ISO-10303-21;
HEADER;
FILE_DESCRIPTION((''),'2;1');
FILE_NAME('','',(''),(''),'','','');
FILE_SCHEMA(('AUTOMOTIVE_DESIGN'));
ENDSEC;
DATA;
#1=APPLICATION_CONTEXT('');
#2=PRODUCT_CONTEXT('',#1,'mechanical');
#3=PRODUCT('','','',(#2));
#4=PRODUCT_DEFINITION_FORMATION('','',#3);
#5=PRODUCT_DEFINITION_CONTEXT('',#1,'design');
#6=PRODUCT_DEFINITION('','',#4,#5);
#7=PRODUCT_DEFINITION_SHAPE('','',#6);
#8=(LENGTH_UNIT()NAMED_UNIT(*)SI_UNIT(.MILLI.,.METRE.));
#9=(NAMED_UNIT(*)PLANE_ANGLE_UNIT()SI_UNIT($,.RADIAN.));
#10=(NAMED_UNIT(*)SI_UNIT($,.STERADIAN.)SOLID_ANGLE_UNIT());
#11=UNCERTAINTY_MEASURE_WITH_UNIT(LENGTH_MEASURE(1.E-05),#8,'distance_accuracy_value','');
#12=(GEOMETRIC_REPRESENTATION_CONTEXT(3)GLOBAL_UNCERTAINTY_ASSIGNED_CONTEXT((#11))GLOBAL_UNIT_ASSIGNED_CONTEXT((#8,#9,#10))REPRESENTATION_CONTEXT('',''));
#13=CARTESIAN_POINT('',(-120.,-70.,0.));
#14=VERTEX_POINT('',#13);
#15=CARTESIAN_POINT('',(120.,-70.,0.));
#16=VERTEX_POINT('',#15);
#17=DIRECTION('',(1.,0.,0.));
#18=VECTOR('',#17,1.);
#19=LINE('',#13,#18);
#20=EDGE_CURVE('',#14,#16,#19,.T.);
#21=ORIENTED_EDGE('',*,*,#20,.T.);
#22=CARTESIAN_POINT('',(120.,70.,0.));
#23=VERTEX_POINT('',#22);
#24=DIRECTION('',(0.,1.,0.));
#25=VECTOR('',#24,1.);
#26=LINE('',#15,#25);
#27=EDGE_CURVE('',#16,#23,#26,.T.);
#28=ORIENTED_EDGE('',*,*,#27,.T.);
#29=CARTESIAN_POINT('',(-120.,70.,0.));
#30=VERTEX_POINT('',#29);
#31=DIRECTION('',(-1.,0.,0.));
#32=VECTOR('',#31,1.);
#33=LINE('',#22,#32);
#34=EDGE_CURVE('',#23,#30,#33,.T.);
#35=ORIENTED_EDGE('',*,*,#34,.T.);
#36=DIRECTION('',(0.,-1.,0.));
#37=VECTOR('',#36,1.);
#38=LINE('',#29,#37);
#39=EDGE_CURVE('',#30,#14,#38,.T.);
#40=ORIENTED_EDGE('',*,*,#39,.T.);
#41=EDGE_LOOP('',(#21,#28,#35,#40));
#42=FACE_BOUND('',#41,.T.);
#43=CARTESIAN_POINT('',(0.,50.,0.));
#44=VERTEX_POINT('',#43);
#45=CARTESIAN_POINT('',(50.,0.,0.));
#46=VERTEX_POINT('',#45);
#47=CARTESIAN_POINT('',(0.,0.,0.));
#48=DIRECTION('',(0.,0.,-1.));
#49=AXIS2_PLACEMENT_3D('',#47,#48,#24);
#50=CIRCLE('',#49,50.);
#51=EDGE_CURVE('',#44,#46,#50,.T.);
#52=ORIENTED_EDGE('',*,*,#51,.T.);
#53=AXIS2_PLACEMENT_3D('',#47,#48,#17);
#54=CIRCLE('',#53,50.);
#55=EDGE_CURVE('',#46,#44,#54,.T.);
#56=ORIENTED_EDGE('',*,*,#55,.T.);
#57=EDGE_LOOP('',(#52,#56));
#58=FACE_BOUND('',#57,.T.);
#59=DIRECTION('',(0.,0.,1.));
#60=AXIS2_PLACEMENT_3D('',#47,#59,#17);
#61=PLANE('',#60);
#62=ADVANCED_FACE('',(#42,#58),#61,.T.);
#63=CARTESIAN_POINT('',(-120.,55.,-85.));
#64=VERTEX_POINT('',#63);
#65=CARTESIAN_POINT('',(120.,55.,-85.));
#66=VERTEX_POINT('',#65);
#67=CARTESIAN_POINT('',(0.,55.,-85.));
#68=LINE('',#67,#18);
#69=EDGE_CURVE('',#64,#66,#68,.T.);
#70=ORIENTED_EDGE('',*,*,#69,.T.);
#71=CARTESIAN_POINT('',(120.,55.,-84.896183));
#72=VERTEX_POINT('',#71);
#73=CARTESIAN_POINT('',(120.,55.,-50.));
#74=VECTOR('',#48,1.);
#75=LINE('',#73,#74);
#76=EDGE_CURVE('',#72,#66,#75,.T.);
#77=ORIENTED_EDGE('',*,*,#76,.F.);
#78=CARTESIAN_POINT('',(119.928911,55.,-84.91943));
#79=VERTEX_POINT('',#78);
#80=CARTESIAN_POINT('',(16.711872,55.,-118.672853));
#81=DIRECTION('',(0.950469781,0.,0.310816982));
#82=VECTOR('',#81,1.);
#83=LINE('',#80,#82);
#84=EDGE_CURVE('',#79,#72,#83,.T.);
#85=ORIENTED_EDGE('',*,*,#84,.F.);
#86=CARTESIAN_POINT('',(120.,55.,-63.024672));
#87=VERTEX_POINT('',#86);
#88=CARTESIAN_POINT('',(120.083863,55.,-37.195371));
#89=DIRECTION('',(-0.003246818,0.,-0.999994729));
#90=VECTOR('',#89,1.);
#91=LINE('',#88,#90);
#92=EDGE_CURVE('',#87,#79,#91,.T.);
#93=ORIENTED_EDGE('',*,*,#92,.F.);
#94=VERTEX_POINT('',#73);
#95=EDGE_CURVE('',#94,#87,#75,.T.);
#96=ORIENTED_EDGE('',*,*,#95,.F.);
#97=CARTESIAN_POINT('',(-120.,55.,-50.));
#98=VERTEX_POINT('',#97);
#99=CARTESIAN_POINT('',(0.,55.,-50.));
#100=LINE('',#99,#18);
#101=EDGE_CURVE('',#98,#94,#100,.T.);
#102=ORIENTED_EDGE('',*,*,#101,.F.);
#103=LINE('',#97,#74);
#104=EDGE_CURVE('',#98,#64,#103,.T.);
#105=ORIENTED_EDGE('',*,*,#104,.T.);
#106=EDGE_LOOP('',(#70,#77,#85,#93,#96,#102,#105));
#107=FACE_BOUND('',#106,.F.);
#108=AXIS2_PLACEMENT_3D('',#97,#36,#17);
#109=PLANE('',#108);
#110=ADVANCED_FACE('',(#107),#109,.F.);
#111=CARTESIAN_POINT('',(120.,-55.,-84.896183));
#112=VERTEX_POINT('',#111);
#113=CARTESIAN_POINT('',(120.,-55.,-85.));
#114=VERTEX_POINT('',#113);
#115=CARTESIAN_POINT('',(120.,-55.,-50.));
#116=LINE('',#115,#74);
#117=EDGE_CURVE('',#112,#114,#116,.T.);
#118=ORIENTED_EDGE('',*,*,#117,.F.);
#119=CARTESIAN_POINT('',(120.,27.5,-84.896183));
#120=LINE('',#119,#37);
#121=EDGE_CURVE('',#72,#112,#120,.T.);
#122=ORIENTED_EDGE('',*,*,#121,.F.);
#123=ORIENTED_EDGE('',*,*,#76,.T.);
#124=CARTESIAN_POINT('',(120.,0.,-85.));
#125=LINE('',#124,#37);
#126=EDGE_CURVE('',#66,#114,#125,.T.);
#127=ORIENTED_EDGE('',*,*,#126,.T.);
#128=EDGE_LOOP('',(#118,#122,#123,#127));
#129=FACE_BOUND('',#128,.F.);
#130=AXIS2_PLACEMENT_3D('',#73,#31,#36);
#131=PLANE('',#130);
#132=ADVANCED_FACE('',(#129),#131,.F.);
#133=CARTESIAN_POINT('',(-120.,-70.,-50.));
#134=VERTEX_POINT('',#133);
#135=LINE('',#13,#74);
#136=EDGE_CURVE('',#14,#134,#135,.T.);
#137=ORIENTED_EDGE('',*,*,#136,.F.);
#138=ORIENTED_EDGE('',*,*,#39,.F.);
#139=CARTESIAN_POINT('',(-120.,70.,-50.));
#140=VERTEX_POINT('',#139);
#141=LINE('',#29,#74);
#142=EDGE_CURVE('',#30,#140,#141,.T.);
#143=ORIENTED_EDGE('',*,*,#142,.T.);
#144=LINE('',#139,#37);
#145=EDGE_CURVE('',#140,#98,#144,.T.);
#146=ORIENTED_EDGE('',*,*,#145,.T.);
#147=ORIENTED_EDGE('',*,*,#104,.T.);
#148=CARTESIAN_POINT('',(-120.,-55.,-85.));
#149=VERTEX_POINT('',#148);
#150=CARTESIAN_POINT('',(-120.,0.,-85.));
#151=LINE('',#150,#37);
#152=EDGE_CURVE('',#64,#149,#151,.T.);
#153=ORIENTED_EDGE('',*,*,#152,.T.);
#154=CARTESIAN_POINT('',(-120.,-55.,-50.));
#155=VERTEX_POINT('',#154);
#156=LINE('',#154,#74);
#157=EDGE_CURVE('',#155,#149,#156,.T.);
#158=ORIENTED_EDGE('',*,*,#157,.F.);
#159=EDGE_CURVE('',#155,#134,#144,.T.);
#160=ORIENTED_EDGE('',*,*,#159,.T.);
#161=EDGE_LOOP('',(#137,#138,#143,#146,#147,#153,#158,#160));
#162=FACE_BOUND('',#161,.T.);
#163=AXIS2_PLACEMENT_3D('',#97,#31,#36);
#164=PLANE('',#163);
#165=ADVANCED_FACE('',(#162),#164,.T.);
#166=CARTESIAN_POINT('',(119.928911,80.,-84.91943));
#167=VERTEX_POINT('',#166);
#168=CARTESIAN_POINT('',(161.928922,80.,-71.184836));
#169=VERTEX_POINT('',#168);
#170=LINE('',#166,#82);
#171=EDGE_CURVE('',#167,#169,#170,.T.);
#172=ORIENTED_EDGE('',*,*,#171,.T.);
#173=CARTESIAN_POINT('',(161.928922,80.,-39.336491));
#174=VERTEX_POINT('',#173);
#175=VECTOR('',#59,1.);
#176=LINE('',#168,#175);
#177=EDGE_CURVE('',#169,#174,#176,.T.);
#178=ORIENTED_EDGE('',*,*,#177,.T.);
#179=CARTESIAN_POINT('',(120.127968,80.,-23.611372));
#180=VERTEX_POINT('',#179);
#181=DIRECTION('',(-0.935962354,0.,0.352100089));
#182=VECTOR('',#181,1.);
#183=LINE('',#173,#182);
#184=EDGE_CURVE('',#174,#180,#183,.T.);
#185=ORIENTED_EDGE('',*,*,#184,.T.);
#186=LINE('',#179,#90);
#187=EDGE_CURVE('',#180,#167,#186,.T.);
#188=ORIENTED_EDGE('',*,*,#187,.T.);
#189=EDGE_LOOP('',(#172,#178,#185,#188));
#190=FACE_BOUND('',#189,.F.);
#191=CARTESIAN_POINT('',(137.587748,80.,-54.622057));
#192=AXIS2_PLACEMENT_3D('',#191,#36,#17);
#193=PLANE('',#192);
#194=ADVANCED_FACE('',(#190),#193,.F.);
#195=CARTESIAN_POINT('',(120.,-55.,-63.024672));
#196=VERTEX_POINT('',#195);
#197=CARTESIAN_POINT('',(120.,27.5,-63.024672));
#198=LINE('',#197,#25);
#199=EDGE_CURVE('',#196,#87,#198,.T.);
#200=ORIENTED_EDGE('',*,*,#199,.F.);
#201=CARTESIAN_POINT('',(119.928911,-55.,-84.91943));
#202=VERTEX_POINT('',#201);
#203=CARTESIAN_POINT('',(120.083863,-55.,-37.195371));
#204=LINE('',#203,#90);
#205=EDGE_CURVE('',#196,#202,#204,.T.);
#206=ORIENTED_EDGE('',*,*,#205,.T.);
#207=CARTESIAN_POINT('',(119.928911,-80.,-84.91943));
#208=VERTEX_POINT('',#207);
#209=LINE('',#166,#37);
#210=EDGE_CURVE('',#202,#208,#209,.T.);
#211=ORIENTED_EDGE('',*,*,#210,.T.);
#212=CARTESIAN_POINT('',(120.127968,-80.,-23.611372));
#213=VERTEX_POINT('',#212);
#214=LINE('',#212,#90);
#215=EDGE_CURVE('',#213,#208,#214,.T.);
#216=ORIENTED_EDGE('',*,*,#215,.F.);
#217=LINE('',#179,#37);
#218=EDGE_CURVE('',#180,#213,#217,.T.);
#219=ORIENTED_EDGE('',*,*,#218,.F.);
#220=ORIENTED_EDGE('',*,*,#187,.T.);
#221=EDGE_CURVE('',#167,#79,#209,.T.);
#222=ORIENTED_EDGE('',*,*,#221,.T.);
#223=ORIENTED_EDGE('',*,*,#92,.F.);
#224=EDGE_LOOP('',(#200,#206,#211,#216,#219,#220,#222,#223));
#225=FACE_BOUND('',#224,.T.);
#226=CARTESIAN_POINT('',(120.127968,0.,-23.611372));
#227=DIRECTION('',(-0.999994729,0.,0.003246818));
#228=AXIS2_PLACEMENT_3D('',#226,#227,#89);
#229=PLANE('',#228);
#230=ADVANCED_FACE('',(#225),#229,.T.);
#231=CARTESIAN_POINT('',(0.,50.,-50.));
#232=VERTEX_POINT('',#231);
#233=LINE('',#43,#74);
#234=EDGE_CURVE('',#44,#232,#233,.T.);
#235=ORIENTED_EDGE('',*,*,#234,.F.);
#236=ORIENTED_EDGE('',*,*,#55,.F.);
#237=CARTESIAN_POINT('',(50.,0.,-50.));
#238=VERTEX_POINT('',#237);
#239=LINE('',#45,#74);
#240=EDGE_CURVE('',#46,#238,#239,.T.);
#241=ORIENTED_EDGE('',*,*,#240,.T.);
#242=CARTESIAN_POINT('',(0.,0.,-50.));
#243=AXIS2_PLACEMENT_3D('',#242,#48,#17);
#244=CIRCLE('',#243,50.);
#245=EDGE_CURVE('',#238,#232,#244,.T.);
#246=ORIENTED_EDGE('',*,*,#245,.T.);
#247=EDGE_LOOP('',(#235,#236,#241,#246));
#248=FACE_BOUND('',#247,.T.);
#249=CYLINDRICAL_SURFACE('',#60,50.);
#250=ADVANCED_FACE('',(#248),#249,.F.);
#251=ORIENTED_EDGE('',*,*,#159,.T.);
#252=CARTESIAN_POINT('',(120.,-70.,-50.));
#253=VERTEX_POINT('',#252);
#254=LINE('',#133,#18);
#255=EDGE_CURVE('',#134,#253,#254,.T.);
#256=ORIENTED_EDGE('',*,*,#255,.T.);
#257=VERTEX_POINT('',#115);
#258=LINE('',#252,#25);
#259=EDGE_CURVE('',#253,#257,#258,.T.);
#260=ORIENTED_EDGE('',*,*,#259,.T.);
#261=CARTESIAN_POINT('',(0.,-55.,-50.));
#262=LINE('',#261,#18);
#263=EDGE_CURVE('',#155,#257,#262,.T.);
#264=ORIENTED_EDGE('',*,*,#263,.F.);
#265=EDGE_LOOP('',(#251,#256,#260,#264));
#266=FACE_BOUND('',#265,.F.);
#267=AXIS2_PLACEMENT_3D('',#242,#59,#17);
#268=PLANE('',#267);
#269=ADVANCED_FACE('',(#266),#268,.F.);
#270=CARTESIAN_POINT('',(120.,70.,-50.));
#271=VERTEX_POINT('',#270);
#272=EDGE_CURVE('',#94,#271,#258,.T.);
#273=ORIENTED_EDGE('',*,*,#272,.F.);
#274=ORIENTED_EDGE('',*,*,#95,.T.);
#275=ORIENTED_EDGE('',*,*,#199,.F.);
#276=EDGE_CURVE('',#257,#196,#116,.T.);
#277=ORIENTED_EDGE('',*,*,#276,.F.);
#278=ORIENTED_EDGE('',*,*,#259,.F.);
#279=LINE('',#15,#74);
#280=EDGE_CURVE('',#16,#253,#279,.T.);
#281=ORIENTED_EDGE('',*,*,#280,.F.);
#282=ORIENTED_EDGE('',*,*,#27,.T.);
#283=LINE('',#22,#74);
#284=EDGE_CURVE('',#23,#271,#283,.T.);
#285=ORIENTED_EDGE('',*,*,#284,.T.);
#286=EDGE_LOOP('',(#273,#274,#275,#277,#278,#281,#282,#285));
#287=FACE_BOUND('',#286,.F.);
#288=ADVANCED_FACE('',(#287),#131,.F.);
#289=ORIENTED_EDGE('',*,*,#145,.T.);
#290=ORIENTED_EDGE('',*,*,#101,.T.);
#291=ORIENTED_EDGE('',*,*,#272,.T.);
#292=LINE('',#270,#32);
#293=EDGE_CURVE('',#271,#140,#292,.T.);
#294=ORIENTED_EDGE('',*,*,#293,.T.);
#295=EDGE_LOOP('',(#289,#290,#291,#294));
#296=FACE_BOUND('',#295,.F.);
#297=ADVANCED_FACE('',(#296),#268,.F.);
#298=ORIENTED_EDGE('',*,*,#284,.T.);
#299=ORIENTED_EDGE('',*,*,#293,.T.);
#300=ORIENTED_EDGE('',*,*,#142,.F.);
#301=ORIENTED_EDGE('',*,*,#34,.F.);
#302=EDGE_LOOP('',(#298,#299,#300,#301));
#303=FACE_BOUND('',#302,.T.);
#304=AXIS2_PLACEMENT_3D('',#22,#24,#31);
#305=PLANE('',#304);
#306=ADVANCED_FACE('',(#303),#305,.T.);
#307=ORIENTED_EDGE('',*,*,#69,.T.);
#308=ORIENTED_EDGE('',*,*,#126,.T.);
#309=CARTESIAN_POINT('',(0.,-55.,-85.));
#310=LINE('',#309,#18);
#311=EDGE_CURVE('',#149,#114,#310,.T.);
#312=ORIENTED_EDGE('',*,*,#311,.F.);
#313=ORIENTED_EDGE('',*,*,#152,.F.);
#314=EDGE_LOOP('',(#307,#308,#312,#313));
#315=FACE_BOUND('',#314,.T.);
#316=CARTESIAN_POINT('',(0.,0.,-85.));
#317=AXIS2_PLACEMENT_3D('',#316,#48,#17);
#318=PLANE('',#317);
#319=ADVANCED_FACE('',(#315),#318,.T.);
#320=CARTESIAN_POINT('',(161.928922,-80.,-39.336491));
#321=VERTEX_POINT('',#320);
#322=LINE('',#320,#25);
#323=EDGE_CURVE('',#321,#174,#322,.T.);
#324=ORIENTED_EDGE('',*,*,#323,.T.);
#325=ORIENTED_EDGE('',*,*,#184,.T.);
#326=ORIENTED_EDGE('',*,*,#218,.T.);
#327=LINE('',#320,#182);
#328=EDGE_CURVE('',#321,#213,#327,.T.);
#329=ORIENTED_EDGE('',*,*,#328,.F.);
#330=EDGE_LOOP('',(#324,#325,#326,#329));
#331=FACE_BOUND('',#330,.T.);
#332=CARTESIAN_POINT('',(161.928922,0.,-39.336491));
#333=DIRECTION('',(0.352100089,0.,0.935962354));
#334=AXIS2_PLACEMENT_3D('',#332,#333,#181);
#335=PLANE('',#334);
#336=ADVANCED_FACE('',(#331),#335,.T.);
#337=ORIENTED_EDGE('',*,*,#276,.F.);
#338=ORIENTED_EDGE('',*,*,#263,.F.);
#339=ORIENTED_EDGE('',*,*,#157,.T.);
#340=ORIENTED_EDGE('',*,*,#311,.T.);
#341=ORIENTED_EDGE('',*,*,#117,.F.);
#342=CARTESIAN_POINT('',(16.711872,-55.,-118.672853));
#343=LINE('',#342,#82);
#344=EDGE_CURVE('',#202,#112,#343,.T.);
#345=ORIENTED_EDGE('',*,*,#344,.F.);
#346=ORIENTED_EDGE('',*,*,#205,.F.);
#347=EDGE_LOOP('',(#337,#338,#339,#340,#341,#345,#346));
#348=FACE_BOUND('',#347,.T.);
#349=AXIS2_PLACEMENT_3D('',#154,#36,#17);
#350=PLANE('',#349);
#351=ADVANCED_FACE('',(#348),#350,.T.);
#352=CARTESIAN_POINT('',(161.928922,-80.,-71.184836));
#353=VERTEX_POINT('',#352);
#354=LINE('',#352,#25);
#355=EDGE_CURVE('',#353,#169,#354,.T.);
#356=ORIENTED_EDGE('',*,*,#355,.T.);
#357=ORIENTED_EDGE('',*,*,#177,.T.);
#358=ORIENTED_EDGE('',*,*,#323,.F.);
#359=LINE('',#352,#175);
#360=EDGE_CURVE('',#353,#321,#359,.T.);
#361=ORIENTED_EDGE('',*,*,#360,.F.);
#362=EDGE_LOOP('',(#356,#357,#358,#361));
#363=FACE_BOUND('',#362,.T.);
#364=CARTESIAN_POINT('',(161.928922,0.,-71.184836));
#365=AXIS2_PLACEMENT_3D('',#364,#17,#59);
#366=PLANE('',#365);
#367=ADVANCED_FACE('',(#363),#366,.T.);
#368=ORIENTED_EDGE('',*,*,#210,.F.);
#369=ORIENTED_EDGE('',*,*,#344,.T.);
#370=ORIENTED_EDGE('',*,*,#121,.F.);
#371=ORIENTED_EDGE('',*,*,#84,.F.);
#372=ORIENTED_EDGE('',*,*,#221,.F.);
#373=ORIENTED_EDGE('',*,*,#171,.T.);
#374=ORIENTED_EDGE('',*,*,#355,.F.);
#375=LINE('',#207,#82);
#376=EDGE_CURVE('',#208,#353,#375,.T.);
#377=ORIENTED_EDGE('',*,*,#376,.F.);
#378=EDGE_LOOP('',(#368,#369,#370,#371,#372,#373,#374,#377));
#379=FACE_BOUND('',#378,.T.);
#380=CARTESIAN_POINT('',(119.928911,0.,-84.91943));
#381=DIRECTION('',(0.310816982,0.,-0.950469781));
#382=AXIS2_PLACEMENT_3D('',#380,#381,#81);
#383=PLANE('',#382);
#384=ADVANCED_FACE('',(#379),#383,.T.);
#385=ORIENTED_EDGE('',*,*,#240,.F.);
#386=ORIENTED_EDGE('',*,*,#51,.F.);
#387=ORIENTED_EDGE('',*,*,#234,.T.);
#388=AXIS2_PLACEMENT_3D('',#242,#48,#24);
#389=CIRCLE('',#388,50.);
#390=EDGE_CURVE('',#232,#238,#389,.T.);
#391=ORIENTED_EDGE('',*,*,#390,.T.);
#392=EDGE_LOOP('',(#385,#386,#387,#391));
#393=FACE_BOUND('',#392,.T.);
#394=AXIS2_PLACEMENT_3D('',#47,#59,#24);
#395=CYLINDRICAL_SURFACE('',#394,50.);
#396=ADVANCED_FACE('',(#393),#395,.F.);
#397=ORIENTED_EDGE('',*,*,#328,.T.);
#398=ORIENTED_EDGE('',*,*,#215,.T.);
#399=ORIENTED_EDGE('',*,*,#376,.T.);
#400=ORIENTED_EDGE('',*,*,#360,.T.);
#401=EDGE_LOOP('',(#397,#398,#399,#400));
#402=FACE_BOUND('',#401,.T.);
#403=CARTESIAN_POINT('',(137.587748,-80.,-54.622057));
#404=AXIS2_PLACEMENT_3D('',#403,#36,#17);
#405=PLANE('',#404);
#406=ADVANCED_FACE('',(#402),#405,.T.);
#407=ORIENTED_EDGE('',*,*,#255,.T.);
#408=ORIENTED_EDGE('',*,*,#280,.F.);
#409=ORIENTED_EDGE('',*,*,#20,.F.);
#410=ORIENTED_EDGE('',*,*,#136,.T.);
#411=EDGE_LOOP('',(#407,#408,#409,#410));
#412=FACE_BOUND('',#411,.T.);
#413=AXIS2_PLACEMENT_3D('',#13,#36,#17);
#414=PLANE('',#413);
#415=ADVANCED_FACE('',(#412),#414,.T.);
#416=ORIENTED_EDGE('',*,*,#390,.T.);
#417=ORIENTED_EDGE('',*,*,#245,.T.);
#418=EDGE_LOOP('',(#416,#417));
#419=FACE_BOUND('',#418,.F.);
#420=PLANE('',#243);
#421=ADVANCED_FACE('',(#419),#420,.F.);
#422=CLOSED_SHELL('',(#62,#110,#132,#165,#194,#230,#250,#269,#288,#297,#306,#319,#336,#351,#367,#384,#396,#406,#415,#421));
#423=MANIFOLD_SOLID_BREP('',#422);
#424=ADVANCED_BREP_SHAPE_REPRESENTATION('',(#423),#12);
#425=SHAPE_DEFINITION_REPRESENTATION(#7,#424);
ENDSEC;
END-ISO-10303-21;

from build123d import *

# Parameters (mm, degrees)
F1_DEPTH = 50
F2_W     = 240
F2_H     = 110
F2_R     = 50
F3_DEPTH = 35
F5_DEPTH = 80


with BuildPart() as f1:
    # F0 (on Top) → F1 (new body)
    with BuildSketch(Plane.XY):
        Polygon((120, 70), (0, 70), (-120, 70), (-120, -70), (120, -70), align=None)
        with BuildLine():
            ThreePointArc((0, 50), (35.3553390593, 35.3553390593), (50, 0))
            ThreePointArc((50, 0), (-35.3553390593, -35.3553390593), (0, 50))
        make_face(mode=Mode.SUBTRACT)
    extrude(amount=-F1_DEPTH)

    # F2 (on face) → F3 (join)
    with BuildSketch(Plane(origin=(0, 0, -50), x_dir=(1, 0, 0), z_dir=(0, 0, -1))):
        Rectangle(F2_W, F2_H)
        Circle(F2_R, mode=Mode.SUBTRACT)
        Circle(F2_R)
    extrude(amount=F3_DEPTH)

    # F4 (on Front) → F5 (join, symmetric)
    with BuildSketch(Plane.XZ):
        Polygon((161.9289219379, -39.3364913762), (120.1279684901, -23.6113723367), (119.9289113283, -84.9194303155), (161.9289219379, -71.184836328), align=None)
    extrude(amount=F5_DEPTH, both=True)


solid = f1.part
